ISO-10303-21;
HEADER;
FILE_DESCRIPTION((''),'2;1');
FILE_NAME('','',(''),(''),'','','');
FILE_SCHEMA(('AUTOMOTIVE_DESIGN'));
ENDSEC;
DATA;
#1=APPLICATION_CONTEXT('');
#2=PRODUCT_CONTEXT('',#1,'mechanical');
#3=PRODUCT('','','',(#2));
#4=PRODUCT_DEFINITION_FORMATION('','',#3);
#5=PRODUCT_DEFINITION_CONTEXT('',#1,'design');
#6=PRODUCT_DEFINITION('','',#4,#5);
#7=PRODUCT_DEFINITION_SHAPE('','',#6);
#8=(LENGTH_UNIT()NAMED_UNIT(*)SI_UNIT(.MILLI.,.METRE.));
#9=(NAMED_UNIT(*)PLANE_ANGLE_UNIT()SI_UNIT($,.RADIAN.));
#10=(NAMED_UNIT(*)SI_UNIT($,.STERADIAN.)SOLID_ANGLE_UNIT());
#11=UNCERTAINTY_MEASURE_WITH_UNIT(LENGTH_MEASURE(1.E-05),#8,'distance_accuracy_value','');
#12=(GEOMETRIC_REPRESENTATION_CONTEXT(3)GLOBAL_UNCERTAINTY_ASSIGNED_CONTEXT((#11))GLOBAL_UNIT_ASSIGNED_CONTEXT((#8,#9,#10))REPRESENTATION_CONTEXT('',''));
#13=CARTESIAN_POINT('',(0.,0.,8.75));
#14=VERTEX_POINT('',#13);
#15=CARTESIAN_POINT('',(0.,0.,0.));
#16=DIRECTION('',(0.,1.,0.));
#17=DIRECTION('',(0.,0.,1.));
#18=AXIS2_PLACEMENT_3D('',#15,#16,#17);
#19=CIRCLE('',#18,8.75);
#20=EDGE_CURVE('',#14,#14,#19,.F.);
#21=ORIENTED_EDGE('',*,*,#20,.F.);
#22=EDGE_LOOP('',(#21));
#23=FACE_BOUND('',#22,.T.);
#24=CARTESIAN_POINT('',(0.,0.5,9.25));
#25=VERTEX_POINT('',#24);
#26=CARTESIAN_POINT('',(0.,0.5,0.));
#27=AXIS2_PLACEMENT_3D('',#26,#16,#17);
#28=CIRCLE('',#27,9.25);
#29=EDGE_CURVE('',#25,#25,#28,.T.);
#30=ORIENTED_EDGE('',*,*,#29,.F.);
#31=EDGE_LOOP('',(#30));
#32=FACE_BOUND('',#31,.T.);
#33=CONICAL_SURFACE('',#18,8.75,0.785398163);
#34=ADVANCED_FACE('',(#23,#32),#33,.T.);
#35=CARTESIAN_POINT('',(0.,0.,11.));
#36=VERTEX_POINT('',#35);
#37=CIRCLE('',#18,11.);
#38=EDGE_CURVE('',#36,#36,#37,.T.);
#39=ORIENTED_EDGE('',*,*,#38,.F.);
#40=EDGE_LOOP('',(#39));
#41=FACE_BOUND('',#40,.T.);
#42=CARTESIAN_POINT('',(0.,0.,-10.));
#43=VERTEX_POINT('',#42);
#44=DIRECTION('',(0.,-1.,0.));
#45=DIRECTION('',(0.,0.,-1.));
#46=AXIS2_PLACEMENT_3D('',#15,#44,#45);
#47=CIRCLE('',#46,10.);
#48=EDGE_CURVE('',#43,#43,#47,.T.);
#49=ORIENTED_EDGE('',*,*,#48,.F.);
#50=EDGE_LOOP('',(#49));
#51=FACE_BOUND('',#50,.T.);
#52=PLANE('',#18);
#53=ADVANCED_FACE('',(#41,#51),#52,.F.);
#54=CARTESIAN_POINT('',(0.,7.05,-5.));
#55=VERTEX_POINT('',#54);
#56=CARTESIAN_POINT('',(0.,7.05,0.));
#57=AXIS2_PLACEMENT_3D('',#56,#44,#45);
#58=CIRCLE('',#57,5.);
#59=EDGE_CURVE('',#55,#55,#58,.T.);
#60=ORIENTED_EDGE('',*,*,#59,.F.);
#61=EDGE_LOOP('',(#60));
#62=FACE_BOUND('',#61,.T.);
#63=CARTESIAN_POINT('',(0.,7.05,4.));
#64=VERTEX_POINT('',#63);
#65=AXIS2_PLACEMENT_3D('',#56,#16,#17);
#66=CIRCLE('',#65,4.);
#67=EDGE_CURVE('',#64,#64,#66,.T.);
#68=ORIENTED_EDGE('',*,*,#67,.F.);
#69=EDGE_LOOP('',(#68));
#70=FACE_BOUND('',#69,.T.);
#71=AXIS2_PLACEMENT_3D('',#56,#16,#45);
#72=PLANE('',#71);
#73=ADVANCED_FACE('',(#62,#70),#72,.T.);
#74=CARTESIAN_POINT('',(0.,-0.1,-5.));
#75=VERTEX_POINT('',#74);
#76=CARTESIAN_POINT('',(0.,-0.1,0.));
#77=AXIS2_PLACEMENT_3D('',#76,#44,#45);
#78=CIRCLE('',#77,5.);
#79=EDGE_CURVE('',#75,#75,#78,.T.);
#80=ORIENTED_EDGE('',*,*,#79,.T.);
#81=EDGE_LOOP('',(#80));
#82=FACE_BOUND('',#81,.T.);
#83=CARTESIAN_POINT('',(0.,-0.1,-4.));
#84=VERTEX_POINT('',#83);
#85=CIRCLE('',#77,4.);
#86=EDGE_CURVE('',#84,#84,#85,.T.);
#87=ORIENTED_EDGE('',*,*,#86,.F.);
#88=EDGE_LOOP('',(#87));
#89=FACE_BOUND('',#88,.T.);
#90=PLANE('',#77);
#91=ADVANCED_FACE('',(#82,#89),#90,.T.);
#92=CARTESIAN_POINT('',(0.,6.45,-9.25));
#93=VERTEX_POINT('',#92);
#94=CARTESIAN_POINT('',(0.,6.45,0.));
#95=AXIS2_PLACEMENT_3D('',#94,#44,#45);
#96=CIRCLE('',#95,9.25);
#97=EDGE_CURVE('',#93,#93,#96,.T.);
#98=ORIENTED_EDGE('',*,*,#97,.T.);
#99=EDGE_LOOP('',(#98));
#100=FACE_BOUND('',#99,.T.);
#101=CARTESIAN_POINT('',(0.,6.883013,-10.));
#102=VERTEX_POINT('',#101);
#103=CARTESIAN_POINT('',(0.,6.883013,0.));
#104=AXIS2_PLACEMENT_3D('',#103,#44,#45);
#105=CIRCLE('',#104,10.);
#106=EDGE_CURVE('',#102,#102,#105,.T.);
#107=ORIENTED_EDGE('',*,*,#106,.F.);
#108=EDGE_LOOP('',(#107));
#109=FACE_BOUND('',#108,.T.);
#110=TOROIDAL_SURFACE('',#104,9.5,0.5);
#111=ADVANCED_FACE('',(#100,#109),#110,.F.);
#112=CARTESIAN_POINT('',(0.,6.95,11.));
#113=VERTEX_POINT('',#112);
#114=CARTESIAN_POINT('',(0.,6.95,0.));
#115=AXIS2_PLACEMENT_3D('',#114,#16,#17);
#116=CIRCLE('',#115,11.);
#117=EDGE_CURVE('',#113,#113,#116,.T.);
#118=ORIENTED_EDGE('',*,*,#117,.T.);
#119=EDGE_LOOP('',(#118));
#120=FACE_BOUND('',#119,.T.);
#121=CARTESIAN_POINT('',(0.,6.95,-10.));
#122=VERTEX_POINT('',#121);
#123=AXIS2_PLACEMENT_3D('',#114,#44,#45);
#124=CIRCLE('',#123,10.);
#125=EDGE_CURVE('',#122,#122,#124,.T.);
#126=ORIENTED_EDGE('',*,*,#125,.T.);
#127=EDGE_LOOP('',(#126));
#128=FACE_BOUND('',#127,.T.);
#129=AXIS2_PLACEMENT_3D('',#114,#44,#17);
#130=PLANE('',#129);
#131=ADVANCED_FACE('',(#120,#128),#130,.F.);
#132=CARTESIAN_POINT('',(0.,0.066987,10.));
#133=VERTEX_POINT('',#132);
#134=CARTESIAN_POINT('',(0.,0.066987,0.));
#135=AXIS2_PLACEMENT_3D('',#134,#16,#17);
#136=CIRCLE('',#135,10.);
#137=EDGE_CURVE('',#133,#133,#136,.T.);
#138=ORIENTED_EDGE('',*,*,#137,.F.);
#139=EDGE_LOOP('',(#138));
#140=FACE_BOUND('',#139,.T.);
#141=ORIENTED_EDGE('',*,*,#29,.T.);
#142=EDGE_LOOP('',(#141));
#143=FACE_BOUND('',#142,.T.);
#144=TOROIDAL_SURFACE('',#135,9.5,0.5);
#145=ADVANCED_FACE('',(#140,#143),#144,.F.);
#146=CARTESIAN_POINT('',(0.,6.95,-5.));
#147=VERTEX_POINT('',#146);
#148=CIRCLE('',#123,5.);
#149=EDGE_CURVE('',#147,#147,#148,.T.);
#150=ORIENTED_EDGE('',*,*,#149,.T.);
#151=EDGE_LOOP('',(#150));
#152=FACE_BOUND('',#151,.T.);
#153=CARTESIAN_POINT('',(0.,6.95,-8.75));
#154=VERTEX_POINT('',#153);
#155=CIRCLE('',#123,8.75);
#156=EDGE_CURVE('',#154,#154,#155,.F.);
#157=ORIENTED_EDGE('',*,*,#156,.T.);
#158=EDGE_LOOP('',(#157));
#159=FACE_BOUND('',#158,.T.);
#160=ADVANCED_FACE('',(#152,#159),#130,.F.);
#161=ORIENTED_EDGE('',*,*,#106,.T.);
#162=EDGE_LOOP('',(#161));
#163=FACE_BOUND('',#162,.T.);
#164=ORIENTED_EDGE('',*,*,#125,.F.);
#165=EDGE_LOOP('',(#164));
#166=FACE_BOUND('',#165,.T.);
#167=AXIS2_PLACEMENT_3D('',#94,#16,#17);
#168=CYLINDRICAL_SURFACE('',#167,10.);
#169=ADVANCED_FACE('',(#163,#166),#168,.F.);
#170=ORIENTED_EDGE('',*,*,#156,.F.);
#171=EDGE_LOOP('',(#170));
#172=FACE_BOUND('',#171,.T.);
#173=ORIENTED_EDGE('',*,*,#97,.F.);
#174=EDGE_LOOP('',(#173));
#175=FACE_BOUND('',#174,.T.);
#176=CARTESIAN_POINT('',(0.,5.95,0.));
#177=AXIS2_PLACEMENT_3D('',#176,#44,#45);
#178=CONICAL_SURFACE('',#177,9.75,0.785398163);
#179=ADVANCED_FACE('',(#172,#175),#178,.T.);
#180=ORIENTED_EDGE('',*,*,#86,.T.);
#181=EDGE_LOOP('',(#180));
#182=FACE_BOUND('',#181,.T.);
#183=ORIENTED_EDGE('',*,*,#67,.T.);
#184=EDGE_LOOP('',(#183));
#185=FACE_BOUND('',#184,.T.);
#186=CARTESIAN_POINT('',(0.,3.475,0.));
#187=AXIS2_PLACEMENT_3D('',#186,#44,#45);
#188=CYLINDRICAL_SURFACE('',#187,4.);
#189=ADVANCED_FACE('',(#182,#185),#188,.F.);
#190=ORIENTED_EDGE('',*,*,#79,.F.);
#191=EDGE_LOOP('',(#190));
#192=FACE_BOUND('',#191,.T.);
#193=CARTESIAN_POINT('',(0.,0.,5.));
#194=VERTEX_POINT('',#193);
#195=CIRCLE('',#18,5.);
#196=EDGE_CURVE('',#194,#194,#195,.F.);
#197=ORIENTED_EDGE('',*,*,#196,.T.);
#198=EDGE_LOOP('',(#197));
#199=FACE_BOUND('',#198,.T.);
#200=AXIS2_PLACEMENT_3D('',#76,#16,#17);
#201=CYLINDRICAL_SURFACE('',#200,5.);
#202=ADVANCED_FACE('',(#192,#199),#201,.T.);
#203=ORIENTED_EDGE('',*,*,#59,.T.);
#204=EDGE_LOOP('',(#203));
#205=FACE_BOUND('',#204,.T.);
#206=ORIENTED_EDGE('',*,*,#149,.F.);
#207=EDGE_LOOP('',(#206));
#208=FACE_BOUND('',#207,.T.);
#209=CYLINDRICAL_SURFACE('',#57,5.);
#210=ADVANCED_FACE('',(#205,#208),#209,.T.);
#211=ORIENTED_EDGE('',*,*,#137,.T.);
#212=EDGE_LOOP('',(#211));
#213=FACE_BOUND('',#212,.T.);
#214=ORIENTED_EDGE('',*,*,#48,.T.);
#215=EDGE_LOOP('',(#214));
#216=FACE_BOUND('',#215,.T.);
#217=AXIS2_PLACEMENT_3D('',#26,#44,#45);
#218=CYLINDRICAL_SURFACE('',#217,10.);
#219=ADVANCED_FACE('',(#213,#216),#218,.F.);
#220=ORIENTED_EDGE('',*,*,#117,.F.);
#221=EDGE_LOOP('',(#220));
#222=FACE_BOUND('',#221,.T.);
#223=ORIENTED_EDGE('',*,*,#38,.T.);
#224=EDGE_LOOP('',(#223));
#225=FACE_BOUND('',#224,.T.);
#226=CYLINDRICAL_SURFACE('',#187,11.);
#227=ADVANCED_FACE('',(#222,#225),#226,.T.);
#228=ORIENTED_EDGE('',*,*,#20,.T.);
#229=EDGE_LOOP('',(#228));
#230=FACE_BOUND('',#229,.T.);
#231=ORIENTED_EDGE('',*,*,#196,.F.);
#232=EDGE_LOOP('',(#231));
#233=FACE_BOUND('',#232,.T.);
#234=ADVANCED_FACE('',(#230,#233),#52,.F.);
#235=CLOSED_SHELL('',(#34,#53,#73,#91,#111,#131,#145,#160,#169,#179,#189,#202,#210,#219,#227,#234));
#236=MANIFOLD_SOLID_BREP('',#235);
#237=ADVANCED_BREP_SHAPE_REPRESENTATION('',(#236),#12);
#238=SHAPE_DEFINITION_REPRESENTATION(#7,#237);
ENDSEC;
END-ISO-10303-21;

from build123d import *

# Parameters (mm, degrees)
SKETCH_1_R             = 11
EXTRUDE_1_DEPTH        = 3.475
SKETCH_3_R             = 10
SKETCH_3_R_2           = 9.75
CUT_EXTRUDE_2_DEPTH    = 0.5
FILLET_4_R             = 0.5
SKETCH_7_R             = 4
CUT_EXTRUDE_3_DEPTH    = 16.939749841
SKETCH_15_R            = 5
EXTRUDE_7_DEPTH        = 0.1
SKETCH_18_R            = 4
CUT_EXTRUDE_4_DEPTH    = 16.961849047
FILLET_4_OF_MIRROR_3_R = 0.5
SKETCH_19_R            = 4
CUT_EXTRUDE_5_DEPTH    = 18.120820658


with BuildPart() as part:
    # Эскиз1 → Бобышка-Вытянуть1 (new body)
    with BuildSketch(Plane(origin=(0, 0, 0), x_dir=(1, 0, 0), z_dir=(0, 1, 0))):
        with Locations(Location((0, 0, 0), (0, 0, 270))):
            Circle(SKETCH_1_R)
    extrude_1 = extrude(amount=EXTRUDE_1_DEPTH)

    # Эскиз3 → Вырез-Вытянуть2 (cut)
    with BuildSketch(Plane.XZ):
        with Locations(Location((0, 0, 0), (0, 0, 270))):
            Circle(SKETCH_3_R)
        with Locations(Location((0, 0, 0), (0, 0, 270))):
            Circle(SKETCH_3_R_2, mode=Mode.SUBTRACT)
    cut_extrude_2 = extrude(amount=-CUT_EXTRUDE_2_DEPTH, mode=Mode.SUBTRACT)

    # Скругление4
    # the kernel refuses this fillet: 0.5 mm, written as the material it adds along each edge
    with BuildSketch(Plane(origin=(0, 0.5, 0), x_dir=(0, 0, -1), z_dir=(-1, 0, 0))) as fillet_4_piece_1:
        with BuildLine():
            CenterArc((9.5, 0.433012702), FILLET_4_R, 300, 60)
            Line((9.75, 0), (9.755, -0.008660254))
            ThreePointArc((9.755, -0.008660254), (9.875, -0.01), (10, -0.01))
            Line((10, -0.01), (10.01, 0))
            Line((10.01, 0), (10.01, 0.433012702))
            Line((10.01, 0.433012702), (10, 0.433012702))
        make_face()
    revolve(axis=Axis((0, 0.5, 0), (0, -1, 0)))

    # Фаска1: read off the stored shape, not the designer's step
    # Фаска1 outline → Фаска1 (revolve, cut)
    with BuildSketch(Plane.XY):
        with BuildLine():
            Line((9.25, 0.5), (8.75, 0))
            Line((8.75, 0), (9.75, 0))
            Line((9.75, 0), (9.75, 0.5))
            ThreePointArc((9.75, 0.5), (9.5, 0.566987298), (9.25, 0.5))
        make_face()
    chamfer_1 = revolve(axis=Axis((0, 0, 0), (0, 1, 0)), mode=Mode.SUBTRACT)

    # Эскиз7 → Вырез-Вытянуть3 (cut, symmetric)
    with BuildSketch(Plane.XZ):
        with Locations(Location((0, 0, 0), (0, 0, 270))):
            Circle(SKETCH_7_R)
    cut_extrude_3 = extrude(amount=CUT_EXTRUDE_3_DEPTH, both=True, mode=Mode.SUBTRACT)

    # Эскиз15 → Бобышка-Вытянуть7 (add)
    with BuildSketch(Plane.XZ):
        with Locations(Location((0, 0, 0), (0, 0, 90))):
            Circle(SKETCH_15_R)
    extrude_7 = extrude(amount=EXTRUDE_7_DEPTH)

    # Эскиз18 → Вырез-Вытянуть4 (cut, through all)
    with BuildSketch(Plane.XZ.offset(0.1)):
        with Locations(Location((0, 0, 0), (0, 0, 270))):
            Circle(SKETCH_18_R)
    extrude(amount=-CUT_EXTRUDE_4_DEPTH, mode=Mode.SUBTRACT)

    # Зеркальное отражение3: Бобышка-Вытянуть1, Вырез-Вытянуть2, Фаска1, Вырез-Вытянуть3, Бобышка-Вытянуть7 across plane
    add(extrude_1.mirror(Plane.ZX.offset(3.475)))
    add(cut_extrude_2.mirror(Plane.ZX.offset(3.475)), mode=Mode.SUBTRACT)
    add(chamfer_1.mirror(Plane.ZX.offset(3.475)), mode=Mode.SUBTRACT)
    add(cut_extrude_3.mirror(Plane.ZX.offset(3.475)), mode=Mode.SUBTRACT)
    add(extrude_7.mirror(Plane.ZX.offset(3.475)))

    # Скругление4 of Зеркальное отражение3
    # the kernel refuses this fillet: 0.5 mm, written as the material it adds along each edge
    with BuildSketch(Plane(origin=(0, 6.45, 0), x_dir=(0, 0, -1), z_dir=(-1, 0, 0))) as fillet_4_of_mirror_3_piece_1:
        with BuildLine():
            CenterArc((9.5, -0.433012702), FILLET_4_OF_MIRROR_3_R, 0, 60)
            Line((9.75, 0), (9.755, 0.008660254))
            ThreePointArc((9.755, 0.008660254), (9.875, 0.01), (10, 0.01))
            Line((10, 0.01), (10.01, 0))
            Line((10.01, 0), (10.01, -0.433012702))
            Line((10.01, -0.433012702), (10, -0.433012702))
        make_face()
    revolve(axis=Axis((0, 6.45, 0), (0, -1, 0)))

    # Эскиз19 → Вырез-Вытянуть5 (cut, through all)
    with BuildSketch(Plane(origin=(0, 7.05, 0), x_dir=(1, 0, 0), z_dir=(0, 1, 0))):
        with Locations(Location((0, 0, 0), (0, 0, 90))):
            Circle(SKETCH_19_R)
    extrude(amount=-CUT_EXTRUDE_5_DEPTH, mode=Mode.SUBTRACT)


solid = part.part
